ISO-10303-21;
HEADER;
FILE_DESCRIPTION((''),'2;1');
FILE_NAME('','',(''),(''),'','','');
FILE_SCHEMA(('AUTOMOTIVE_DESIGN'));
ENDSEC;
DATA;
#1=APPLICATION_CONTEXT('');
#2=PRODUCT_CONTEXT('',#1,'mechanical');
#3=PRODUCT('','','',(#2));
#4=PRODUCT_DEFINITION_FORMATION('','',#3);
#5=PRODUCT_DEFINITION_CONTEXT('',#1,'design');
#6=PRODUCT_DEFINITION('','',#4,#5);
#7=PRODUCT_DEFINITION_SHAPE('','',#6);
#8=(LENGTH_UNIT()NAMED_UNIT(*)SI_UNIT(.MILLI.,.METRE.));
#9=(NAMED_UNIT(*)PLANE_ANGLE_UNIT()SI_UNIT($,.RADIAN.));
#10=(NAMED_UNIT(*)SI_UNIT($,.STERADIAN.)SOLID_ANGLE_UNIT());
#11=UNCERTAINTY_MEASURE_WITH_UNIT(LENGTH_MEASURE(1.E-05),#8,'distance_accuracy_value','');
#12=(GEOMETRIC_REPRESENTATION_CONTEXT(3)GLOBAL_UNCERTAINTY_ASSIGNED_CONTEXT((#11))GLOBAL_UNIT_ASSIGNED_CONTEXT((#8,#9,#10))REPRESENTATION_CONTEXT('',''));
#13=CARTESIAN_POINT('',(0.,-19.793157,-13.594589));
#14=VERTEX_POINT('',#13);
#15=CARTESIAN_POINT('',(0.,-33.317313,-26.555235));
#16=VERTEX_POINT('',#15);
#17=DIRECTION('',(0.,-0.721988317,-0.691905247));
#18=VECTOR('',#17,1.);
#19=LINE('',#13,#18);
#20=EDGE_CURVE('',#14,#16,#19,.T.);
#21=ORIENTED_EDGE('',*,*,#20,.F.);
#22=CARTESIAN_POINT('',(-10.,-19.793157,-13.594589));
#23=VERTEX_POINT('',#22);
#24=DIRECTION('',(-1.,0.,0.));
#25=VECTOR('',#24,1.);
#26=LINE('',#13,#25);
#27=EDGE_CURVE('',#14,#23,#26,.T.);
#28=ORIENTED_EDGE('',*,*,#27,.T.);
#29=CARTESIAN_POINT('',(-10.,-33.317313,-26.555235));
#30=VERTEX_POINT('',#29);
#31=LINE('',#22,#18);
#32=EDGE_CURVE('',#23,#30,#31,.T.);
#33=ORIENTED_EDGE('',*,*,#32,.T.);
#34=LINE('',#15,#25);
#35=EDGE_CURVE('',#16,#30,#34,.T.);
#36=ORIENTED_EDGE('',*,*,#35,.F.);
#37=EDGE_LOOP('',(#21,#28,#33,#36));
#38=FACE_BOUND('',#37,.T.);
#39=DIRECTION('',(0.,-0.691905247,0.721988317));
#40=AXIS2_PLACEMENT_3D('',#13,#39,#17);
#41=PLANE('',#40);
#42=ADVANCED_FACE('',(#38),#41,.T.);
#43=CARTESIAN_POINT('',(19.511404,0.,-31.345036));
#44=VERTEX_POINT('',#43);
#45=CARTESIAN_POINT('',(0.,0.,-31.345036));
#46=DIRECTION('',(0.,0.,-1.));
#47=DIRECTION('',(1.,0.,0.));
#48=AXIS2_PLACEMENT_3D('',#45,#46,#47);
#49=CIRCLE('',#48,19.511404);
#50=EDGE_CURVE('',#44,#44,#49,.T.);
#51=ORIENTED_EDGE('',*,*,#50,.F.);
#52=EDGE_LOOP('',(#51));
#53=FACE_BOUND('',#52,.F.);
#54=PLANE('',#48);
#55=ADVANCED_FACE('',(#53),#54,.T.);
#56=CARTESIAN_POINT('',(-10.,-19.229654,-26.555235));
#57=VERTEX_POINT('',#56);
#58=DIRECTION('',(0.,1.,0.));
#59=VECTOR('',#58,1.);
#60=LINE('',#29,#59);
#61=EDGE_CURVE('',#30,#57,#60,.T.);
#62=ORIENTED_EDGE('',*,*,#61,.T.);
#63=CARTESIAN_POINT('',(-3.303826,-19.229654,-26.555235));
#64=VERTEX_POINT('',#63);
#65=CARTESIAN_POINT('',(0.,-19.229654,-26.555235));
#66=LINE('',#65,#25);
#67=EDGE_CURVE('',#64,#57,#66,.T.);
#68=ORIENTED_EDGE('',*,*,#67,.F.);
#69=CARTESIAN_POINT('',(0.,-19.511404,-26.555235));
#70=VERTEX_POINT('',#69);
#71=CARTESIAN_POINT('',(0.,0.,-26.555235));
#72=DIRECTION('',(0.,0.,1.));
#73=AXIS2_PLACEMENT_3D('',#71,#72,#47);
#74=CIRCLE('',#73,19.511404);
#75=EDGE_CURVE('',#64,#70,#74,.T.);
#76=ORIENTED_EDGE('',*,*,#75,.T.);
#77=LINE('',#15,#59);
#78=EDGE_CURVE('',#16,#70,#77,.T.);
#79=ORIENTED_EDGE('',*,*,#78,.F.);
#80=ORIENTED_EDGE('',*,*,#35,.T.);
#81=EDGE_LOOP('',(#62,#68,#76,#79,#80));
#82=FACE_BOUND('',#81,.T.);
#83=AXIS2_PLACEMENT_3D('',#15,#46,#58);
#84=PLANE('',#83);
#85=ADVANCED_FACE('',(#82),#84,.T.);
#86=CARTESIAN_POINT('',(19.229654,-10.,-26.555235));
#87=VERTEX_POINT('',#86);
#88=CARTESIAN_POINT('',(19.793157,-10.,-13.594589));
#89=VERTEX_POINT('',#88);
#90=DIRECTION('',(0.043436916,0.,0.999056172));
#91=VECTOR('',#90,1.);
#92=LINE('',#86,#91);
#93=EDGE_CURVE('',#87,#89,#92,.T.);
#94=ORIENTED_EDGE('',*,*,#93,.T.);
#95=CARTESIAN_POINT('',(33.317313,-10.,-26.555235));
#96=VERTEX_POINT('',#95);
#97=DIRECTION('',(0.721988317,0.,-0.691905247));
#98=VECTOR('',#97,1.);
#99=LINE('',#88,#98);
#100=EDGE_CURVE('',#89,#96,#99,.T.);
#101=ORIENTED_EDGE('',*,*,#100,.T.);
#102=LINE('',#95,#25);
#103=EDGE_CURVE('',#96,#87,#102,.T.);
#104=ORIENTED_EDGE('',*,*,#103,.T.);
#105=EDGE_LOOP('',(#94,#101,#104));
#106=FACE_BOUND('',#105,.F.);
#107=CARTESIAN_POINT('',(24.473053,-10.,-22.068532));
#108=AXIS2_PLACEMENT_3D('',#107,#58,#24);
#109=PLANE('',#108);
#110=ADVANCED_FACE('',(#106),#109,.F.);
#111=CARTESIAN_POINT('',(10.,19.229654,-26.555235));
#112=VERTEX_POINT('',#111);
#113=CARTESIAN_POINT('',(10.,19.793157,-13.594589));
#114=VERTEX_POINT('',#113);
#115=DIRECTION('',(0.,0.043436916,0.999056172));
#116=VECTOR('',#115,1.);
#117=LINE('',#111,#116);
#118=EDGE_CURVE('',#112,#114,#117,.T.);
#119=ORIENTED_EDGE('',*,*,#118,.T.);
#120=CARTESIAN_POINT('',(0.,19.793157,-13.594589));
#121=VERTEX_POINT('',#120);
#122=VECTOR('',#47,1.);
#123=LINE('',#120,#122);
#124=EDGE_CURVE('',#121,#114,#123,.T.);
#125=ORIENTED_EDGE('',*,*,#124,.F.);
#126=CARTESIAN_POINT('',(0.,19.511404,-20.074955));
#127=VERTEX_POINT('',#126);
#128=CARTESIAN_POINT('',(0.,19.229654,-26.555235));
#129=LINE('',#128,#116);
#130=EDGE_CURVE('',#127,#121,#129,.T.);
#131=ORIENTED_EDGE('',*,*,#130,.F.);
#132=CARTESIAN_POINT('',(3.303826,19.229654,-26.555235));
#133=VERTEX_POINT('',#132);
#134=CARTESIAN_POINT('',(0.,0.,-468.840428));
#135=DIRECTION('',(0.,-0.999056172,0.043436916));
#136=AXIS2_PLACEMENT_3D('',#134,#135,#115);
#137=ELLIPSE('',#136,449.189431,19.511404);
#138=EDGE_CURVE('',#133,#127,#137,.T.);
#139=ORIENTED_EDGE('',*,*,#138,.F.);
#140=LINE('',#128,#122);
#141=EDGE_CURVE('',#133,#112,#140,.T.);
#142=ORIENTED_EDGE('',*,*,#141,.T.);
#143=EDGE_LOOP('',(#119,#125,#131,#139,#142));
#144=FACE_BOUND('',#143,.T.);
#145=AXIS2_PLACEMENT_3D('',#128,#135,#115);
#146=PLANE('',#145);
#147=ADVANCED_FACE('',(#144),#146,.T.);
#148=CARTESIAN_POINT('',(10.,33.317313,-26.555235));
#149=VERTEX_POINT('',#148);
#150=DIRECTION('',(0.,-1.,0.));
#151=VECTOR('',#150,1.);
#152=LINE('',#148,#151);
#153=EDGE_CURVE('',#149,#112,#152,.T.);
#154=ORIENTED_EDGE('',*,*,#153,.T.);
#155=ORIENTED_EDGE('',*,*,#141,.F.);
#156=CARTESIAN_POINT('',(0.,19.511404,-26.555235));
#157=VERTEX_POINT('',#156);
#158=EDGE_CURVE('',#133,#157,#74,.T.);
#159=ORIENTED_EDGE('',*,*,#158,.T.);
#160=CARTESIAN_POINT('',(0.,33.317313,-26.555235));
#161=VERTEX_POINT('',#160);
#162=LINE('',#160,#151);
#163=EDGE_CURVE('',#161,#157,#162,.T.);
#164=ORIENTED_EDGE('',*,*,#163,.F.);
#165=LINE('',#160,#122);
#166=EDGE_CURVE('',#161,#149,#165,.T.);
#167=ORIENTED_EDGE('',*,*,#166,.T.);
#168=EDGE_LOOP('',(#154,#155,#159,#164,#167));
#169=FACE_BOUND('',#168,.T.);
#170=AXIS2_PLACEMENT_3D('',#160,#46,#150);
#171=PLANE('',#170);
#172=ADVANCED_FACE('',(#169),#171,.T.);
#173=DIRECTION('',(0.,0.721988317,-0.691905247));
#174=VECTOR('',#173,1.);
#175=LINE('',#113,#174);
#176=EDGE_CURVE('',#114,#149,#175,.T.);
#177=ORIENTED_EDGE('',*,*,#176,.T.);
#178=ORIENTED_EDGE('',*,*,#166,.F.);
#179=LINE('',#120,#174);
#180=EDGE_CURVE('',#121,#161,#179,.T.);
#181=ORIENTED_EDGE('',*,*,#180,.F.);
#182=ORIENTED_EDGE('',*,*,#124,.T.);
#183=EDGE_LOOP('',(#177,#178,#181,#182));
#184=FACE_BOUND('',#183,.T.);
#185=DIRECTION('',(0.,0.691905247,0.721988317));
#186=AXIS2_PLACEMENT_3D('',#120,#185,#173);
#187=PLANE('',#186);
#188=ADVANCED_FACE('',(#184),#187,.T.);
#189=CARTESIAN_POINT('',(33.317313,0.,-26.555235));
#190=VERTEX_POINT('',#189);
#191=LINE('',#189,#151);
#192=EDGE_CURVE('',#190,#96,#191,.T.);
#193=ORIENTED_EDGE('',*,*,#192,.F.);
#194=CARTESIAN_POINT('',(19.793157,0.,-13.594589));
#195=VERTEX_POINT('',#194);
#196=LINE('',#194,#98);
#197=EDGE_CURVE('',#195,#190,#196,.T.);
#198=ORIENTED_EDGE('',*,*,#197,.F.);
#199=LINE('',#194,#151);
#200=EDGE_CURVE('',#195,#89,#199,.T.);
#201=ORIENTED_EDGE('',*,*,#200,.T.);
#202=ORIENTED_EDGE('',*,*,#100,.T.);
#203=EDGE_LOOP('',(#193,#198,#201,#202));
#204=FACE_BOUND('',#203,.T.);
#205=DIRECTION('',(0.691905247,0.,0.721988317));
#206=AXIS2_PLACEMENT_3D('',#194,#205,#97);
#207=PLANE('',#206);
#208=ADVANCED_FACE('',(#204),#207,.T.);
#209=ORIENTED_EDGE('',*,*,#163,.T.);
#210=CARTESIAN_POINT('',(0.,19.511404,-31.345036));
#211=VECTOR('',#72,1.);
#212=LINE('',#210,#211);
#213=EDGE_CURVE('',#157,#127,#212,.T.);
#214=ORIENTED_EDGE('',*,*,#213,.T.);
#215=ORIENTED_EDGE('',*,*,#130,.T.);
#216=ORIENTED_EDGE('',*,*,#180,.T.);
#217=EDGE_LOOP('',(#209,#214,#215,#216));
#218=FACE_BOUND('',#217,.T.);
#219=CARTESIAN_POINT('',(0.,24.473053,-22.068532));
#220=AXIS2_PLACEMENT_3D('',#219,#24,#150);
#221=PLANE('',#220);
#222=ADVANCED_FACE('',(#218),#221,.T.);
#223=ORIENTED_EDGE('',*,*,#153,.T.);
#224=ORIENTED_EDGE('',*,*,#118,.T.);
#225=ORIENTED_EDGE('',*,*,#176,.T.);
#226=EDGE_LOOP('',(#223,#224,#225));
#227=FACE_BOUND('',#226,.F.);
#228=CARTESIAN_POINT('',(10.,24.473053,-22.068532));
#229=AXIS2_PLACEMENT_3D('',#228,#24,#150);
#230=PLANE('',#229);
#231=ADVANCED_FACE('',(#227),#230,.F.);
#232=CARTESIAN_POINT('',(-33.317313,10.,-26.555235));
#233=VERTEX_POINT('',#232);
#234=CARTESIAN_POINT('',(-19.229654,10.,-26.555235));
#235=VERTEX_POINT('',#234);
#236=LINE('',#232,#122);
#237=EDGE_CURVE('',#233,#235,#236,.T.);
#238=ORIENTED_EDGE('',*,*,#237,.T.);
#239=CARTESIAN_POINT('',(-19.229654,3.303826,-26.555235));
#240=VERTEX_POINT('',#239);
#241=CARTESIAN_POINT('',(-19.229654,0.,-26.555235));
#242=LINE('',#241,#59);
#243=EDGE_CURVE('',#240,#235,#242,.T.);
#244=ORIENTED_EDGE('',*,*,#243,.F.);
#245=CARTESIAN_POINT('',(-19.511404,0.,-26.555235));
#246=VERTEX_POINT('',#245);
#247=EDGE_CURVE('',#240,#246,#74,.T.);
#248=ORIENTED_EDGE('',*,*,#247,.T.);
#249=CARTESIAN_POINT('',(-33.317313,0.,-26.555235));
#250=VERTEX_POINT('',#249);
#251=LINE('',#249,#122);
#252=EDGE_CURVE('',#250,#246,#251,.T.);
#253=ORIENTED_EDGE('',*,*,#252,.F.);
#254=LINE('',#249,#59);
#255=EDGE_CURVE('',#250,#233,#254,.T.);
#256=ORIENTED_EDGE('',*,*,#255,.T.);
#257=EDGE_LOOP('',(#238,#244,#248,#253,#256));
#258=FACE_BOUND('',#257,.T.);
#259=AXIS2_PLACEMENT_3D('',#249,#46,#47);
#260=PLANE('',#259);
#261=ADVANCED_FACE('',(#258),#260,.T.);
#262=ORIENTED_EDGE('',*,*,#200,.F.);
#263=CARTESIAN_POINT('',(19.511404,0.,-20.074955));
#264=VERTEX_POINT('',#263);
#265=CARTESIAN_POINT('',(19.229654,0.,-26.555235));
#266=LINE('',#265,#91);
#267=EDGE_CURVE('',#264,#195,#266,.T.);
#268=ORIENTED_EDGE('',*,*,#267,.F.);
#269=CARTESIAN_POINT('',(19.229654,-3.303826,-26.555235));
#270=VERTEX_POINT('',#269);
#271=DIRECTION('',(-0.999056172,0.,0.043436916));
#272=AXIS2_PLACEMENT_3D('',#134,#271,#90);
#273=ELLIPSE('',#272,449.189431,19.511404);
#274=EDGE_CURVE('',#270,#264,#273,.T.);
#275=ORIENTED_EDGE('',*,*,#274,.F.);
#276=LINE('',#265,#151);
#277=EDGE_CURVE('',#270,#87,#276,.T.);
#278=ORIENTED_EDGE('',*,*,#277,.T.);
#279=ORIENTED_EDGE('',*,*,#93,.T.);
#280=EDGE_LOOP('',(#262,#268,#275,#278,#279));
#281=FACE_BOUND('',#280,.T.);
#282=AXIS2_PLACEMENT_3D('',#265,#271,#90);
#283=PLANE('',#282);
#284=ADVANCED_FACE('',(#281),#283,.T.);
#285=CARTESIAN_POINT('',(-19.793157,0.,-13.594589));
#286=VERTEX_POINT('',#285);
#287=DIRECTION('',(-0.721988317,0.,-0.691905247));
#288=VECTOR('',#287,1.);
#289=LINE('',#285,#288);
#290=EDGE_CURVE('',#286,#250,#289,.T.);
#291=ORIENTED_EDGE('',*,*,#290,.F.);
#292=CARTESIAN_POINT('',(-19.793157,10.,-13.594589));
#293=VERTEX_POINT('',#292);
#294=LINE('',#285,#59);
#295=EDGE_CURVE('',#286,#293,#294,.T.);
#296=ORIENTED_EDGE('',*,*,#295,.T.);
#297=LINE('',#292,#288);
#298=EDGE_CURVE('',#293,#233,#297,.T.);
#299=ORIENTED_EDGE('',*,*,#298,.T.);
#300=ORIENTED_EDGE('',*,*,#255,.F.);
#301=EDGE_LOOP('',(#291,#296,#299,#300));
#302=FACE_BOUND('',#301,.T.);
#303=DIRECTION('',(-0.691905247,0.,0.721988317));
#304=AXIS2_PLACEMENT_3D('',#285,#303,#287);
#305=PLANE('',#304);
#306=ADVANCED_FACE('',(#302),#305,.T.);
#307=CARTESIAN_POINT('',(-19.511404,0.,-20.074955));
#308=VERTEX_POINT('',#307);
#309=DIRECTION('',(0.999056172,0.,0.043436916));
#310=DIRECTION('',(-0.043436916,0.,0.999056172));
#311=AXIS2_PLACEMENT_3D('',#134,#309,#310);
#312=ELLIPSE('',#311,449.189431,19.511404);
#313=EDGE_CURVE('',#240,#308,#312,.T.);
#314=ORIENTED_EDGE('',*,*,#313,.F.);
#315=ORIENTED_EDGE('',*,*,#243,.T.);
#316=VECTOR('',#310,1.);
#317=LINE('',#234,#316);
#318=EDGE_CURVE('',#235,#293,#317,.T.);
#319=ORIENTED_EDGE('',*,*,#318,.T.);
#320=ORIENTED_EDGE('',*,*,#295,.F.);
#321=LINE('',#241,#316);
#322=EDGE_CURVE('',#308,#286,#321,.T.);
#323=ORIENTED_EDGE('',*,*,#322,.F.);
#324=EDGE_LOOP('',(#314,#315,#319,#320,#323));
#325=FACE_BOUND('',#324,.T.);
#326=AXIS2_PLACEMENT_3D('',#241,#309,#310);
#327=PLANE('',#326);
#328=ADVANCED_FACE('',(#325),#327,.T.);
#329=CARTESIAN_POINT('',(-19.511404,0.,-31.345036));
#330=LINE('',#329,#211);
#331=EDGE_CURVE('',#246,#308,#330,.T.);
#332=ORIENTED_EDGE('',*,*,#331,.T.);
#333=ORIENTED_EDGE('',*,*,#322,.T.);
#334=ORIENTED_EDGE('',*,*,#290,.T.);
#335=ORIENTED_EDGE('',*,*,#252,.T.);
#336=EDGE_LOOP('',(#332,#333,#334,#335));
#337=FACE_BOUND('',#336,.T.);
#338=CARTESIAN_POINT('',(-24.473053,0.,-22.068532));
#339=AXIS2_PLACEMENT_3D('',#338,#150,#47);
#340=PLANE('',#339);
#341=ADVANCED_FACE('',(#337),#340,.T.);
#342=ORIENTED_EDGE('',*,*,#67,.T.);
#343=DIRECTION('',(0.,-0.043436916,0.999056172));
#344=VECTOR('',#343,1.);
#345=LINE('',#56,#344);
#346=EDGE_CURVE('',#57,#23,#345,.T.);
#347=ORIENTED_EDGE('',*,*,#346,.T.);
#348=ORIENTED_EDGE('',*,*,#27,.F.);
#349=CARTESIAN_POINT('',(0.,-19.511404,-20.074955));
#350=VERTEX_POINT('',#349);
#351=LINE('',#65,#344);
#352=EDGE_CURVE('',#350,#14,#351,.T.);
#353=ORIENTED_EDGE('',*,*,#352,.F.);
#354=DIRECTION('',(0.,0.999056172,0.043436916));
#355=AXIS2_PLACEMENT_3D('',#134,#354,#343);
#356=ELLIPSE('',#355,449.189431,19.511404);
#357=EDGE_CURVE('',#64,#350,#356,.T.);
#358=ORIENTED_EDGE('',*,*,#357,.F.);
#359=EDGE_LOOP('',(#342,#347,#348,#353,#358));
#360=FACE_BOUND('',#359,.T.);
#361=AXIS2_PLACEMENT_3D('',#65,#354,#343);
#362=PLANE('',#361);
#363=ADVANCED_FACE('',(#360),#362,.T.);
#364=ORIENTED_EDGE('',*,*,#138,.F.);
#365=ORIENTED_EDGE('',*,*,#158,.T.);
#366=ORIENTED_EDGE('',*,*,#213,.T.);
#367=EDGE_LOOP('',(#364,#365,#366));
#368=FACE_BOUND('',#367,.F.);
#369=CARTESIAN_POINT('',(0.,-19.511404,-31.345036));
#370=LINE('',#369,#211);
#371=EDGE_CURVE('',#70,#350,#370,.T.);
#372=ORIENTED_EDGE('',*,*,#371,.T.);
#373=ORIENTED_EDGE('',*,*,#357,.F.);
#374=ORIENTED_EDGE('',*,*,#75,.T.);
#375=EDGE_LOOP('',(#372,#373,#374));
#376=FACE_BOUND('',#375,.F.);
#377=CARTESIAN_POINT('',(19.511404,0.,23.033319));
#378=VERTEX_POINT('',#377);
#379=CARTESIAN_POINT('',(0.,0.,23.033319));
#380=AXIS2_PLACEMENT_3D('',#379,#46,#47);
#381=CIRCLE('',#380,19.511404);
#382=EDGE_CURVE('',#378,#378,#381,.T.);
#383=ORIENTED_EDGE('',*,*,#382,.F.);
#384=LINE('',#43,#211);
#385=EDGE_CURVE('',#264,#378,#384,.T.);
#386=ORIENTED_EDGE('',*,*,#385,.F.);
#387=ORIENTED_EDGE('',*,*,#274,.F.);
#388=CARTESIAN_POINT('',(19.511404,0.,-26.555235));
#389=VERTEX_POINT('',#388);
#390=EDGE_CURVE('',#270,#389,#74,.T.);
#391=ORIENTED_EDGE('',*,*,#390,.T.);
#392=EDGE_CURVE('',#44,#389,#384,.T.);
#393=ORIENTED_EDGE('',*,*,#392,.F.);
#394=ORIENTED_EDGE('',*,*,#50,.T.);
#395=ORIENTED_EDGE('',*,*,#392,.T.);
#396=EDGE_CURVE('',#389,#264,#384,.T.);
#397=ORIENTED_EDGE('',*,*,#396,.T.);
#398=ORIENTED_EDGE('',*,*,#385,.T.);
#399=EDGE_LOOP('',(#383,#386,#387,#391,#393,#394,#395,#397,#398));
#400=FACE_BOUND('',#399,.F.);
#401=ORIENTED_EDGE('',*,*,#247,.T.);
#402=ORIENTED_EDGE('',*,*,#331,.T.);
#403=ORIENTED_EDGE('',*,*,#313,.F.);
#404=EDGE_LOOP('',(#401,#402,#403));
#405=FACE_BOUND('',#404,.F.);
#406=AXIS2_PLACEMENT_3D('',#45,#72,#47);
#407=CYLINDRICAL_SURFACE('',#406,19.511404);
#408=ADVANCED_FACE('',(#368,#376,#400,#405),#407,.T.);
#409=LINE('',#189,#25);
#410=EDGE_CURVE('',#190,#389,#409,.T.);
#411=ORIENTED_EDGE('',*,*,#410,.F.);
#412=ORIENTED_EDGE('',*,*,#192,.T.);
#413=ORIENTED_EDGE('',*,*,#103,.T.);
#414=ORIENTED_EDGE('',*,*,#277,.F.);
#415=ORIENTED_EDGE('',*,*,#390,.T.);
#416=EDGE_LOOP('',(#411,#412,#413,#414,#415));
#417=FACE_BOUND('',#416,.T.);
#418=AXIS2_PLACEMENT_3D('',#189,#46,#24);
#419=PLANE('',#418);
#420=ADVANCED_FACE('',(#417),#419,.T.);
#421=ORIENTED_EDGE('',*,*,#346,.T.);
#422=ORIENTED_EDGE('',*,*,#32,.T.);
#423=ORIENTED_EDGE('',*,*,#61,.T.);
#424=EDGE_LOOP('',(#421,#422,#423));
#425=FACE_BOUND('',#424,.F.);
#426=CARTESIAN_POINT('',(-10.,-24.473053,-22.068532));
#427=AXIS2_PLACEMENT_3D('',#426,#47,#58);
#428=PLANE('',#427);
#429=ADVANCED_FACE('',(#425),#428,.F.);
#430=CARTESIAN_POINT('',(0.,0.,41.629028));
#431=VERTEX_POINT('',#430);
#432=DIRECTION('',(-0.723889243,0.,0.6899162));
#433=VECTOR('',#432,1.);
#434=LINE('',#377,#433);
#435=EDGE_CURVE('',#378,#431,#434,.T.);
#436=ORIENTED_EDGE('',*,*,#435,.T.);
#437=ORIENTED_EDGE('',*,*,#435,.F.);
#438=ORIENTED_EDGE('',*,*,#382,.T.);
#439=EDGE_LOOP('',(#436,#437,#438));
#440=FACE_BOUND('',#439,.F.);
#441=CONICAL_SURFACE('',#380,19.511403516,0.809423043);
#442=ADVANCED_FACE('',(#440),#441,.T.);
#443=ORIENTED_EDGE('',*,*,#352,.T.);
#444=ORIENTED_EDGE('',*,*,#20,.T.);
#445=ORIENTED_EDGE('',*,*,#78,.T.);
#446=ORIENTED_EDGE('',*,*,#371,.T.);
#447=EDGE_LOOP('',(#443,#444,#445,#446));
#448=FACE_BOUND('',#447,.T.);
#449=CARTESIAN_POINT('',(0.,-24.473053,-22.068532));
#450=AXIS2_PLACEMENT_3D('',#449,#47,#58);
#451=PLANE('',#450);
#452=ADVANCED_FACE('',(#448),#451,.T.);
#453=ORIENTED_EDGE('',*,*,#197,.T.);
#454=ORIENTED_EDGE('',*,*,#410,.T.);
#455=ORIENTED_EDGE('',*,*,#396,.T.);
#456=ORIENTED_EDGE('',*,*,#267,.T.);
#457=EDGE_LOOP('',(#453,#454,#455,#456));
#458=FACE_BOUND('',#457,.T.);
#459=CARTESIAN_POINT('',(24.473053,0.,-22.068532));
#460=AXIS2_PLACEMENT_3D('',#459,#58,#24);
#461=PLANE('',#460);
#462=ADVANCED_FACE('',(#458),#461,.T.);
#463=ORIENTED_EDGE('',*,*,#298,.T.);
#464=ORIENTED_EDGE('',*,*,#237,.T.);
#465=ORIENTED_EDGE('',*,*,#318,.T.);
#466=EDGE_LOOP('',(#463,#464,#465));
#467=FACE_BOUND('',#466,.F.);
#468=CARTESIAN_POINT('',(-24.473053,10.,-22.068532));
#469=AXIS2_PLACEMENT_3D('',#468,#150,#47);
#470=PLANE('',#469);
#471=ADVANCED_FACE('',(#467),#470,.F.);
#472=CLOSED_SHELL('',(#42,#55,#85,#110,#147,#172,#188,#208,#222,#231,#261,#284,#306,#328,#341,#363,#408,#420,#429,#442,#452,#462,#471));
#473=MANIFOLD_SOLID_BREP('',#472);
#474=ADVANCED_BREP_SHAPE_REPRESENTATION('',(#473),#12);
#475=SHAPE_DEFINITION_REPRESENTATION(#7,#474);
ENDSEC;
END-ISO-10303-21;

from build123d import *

# Parameters (mm, degrees)
F3_DEPTH        = 10
F3_COPIES_COUNT = 4


# Not quite as in the source:
# - a pattern or mirror of a feature is missing from the dataset's text; its kind, count and spacing are read off the source's solid


with BuildPart() as f1:
    # F0 (on Front) → F1 (revolve)
    with BuildSketch(Plane.XZ):
        Polygon((19.5114035159, 23.0333190411), (0, 41.6290275753), (0, -31.3450358808), (19.5114035159, -31.3450358808), align=None)
    revolve(axis=Axis((0, 0, 5.1419958472), (0, 0, -1)))

    # F2 (on Right) → F3 (join)
    with BuildSketch(Plane.YZ):
        Polygon((-19.2296542227, -26.5552345663), (-19.7931565344, -13.5945891961), (-33.3173125982, -26.5552345663), align=None)
    f3 = extrude(amount=-F3_DEPTH)

    # F3_copies: F3 ×4 about axis
    f3_copies_axis = Axis((0, 0, 0), (0, 0, 1))
    for i in range(1, F3_COPIES_COUNT):
        add(f3.rotate(f3_copies_axis, i * 360 / F3_COPIES_COUNT))


solid = f1.part
